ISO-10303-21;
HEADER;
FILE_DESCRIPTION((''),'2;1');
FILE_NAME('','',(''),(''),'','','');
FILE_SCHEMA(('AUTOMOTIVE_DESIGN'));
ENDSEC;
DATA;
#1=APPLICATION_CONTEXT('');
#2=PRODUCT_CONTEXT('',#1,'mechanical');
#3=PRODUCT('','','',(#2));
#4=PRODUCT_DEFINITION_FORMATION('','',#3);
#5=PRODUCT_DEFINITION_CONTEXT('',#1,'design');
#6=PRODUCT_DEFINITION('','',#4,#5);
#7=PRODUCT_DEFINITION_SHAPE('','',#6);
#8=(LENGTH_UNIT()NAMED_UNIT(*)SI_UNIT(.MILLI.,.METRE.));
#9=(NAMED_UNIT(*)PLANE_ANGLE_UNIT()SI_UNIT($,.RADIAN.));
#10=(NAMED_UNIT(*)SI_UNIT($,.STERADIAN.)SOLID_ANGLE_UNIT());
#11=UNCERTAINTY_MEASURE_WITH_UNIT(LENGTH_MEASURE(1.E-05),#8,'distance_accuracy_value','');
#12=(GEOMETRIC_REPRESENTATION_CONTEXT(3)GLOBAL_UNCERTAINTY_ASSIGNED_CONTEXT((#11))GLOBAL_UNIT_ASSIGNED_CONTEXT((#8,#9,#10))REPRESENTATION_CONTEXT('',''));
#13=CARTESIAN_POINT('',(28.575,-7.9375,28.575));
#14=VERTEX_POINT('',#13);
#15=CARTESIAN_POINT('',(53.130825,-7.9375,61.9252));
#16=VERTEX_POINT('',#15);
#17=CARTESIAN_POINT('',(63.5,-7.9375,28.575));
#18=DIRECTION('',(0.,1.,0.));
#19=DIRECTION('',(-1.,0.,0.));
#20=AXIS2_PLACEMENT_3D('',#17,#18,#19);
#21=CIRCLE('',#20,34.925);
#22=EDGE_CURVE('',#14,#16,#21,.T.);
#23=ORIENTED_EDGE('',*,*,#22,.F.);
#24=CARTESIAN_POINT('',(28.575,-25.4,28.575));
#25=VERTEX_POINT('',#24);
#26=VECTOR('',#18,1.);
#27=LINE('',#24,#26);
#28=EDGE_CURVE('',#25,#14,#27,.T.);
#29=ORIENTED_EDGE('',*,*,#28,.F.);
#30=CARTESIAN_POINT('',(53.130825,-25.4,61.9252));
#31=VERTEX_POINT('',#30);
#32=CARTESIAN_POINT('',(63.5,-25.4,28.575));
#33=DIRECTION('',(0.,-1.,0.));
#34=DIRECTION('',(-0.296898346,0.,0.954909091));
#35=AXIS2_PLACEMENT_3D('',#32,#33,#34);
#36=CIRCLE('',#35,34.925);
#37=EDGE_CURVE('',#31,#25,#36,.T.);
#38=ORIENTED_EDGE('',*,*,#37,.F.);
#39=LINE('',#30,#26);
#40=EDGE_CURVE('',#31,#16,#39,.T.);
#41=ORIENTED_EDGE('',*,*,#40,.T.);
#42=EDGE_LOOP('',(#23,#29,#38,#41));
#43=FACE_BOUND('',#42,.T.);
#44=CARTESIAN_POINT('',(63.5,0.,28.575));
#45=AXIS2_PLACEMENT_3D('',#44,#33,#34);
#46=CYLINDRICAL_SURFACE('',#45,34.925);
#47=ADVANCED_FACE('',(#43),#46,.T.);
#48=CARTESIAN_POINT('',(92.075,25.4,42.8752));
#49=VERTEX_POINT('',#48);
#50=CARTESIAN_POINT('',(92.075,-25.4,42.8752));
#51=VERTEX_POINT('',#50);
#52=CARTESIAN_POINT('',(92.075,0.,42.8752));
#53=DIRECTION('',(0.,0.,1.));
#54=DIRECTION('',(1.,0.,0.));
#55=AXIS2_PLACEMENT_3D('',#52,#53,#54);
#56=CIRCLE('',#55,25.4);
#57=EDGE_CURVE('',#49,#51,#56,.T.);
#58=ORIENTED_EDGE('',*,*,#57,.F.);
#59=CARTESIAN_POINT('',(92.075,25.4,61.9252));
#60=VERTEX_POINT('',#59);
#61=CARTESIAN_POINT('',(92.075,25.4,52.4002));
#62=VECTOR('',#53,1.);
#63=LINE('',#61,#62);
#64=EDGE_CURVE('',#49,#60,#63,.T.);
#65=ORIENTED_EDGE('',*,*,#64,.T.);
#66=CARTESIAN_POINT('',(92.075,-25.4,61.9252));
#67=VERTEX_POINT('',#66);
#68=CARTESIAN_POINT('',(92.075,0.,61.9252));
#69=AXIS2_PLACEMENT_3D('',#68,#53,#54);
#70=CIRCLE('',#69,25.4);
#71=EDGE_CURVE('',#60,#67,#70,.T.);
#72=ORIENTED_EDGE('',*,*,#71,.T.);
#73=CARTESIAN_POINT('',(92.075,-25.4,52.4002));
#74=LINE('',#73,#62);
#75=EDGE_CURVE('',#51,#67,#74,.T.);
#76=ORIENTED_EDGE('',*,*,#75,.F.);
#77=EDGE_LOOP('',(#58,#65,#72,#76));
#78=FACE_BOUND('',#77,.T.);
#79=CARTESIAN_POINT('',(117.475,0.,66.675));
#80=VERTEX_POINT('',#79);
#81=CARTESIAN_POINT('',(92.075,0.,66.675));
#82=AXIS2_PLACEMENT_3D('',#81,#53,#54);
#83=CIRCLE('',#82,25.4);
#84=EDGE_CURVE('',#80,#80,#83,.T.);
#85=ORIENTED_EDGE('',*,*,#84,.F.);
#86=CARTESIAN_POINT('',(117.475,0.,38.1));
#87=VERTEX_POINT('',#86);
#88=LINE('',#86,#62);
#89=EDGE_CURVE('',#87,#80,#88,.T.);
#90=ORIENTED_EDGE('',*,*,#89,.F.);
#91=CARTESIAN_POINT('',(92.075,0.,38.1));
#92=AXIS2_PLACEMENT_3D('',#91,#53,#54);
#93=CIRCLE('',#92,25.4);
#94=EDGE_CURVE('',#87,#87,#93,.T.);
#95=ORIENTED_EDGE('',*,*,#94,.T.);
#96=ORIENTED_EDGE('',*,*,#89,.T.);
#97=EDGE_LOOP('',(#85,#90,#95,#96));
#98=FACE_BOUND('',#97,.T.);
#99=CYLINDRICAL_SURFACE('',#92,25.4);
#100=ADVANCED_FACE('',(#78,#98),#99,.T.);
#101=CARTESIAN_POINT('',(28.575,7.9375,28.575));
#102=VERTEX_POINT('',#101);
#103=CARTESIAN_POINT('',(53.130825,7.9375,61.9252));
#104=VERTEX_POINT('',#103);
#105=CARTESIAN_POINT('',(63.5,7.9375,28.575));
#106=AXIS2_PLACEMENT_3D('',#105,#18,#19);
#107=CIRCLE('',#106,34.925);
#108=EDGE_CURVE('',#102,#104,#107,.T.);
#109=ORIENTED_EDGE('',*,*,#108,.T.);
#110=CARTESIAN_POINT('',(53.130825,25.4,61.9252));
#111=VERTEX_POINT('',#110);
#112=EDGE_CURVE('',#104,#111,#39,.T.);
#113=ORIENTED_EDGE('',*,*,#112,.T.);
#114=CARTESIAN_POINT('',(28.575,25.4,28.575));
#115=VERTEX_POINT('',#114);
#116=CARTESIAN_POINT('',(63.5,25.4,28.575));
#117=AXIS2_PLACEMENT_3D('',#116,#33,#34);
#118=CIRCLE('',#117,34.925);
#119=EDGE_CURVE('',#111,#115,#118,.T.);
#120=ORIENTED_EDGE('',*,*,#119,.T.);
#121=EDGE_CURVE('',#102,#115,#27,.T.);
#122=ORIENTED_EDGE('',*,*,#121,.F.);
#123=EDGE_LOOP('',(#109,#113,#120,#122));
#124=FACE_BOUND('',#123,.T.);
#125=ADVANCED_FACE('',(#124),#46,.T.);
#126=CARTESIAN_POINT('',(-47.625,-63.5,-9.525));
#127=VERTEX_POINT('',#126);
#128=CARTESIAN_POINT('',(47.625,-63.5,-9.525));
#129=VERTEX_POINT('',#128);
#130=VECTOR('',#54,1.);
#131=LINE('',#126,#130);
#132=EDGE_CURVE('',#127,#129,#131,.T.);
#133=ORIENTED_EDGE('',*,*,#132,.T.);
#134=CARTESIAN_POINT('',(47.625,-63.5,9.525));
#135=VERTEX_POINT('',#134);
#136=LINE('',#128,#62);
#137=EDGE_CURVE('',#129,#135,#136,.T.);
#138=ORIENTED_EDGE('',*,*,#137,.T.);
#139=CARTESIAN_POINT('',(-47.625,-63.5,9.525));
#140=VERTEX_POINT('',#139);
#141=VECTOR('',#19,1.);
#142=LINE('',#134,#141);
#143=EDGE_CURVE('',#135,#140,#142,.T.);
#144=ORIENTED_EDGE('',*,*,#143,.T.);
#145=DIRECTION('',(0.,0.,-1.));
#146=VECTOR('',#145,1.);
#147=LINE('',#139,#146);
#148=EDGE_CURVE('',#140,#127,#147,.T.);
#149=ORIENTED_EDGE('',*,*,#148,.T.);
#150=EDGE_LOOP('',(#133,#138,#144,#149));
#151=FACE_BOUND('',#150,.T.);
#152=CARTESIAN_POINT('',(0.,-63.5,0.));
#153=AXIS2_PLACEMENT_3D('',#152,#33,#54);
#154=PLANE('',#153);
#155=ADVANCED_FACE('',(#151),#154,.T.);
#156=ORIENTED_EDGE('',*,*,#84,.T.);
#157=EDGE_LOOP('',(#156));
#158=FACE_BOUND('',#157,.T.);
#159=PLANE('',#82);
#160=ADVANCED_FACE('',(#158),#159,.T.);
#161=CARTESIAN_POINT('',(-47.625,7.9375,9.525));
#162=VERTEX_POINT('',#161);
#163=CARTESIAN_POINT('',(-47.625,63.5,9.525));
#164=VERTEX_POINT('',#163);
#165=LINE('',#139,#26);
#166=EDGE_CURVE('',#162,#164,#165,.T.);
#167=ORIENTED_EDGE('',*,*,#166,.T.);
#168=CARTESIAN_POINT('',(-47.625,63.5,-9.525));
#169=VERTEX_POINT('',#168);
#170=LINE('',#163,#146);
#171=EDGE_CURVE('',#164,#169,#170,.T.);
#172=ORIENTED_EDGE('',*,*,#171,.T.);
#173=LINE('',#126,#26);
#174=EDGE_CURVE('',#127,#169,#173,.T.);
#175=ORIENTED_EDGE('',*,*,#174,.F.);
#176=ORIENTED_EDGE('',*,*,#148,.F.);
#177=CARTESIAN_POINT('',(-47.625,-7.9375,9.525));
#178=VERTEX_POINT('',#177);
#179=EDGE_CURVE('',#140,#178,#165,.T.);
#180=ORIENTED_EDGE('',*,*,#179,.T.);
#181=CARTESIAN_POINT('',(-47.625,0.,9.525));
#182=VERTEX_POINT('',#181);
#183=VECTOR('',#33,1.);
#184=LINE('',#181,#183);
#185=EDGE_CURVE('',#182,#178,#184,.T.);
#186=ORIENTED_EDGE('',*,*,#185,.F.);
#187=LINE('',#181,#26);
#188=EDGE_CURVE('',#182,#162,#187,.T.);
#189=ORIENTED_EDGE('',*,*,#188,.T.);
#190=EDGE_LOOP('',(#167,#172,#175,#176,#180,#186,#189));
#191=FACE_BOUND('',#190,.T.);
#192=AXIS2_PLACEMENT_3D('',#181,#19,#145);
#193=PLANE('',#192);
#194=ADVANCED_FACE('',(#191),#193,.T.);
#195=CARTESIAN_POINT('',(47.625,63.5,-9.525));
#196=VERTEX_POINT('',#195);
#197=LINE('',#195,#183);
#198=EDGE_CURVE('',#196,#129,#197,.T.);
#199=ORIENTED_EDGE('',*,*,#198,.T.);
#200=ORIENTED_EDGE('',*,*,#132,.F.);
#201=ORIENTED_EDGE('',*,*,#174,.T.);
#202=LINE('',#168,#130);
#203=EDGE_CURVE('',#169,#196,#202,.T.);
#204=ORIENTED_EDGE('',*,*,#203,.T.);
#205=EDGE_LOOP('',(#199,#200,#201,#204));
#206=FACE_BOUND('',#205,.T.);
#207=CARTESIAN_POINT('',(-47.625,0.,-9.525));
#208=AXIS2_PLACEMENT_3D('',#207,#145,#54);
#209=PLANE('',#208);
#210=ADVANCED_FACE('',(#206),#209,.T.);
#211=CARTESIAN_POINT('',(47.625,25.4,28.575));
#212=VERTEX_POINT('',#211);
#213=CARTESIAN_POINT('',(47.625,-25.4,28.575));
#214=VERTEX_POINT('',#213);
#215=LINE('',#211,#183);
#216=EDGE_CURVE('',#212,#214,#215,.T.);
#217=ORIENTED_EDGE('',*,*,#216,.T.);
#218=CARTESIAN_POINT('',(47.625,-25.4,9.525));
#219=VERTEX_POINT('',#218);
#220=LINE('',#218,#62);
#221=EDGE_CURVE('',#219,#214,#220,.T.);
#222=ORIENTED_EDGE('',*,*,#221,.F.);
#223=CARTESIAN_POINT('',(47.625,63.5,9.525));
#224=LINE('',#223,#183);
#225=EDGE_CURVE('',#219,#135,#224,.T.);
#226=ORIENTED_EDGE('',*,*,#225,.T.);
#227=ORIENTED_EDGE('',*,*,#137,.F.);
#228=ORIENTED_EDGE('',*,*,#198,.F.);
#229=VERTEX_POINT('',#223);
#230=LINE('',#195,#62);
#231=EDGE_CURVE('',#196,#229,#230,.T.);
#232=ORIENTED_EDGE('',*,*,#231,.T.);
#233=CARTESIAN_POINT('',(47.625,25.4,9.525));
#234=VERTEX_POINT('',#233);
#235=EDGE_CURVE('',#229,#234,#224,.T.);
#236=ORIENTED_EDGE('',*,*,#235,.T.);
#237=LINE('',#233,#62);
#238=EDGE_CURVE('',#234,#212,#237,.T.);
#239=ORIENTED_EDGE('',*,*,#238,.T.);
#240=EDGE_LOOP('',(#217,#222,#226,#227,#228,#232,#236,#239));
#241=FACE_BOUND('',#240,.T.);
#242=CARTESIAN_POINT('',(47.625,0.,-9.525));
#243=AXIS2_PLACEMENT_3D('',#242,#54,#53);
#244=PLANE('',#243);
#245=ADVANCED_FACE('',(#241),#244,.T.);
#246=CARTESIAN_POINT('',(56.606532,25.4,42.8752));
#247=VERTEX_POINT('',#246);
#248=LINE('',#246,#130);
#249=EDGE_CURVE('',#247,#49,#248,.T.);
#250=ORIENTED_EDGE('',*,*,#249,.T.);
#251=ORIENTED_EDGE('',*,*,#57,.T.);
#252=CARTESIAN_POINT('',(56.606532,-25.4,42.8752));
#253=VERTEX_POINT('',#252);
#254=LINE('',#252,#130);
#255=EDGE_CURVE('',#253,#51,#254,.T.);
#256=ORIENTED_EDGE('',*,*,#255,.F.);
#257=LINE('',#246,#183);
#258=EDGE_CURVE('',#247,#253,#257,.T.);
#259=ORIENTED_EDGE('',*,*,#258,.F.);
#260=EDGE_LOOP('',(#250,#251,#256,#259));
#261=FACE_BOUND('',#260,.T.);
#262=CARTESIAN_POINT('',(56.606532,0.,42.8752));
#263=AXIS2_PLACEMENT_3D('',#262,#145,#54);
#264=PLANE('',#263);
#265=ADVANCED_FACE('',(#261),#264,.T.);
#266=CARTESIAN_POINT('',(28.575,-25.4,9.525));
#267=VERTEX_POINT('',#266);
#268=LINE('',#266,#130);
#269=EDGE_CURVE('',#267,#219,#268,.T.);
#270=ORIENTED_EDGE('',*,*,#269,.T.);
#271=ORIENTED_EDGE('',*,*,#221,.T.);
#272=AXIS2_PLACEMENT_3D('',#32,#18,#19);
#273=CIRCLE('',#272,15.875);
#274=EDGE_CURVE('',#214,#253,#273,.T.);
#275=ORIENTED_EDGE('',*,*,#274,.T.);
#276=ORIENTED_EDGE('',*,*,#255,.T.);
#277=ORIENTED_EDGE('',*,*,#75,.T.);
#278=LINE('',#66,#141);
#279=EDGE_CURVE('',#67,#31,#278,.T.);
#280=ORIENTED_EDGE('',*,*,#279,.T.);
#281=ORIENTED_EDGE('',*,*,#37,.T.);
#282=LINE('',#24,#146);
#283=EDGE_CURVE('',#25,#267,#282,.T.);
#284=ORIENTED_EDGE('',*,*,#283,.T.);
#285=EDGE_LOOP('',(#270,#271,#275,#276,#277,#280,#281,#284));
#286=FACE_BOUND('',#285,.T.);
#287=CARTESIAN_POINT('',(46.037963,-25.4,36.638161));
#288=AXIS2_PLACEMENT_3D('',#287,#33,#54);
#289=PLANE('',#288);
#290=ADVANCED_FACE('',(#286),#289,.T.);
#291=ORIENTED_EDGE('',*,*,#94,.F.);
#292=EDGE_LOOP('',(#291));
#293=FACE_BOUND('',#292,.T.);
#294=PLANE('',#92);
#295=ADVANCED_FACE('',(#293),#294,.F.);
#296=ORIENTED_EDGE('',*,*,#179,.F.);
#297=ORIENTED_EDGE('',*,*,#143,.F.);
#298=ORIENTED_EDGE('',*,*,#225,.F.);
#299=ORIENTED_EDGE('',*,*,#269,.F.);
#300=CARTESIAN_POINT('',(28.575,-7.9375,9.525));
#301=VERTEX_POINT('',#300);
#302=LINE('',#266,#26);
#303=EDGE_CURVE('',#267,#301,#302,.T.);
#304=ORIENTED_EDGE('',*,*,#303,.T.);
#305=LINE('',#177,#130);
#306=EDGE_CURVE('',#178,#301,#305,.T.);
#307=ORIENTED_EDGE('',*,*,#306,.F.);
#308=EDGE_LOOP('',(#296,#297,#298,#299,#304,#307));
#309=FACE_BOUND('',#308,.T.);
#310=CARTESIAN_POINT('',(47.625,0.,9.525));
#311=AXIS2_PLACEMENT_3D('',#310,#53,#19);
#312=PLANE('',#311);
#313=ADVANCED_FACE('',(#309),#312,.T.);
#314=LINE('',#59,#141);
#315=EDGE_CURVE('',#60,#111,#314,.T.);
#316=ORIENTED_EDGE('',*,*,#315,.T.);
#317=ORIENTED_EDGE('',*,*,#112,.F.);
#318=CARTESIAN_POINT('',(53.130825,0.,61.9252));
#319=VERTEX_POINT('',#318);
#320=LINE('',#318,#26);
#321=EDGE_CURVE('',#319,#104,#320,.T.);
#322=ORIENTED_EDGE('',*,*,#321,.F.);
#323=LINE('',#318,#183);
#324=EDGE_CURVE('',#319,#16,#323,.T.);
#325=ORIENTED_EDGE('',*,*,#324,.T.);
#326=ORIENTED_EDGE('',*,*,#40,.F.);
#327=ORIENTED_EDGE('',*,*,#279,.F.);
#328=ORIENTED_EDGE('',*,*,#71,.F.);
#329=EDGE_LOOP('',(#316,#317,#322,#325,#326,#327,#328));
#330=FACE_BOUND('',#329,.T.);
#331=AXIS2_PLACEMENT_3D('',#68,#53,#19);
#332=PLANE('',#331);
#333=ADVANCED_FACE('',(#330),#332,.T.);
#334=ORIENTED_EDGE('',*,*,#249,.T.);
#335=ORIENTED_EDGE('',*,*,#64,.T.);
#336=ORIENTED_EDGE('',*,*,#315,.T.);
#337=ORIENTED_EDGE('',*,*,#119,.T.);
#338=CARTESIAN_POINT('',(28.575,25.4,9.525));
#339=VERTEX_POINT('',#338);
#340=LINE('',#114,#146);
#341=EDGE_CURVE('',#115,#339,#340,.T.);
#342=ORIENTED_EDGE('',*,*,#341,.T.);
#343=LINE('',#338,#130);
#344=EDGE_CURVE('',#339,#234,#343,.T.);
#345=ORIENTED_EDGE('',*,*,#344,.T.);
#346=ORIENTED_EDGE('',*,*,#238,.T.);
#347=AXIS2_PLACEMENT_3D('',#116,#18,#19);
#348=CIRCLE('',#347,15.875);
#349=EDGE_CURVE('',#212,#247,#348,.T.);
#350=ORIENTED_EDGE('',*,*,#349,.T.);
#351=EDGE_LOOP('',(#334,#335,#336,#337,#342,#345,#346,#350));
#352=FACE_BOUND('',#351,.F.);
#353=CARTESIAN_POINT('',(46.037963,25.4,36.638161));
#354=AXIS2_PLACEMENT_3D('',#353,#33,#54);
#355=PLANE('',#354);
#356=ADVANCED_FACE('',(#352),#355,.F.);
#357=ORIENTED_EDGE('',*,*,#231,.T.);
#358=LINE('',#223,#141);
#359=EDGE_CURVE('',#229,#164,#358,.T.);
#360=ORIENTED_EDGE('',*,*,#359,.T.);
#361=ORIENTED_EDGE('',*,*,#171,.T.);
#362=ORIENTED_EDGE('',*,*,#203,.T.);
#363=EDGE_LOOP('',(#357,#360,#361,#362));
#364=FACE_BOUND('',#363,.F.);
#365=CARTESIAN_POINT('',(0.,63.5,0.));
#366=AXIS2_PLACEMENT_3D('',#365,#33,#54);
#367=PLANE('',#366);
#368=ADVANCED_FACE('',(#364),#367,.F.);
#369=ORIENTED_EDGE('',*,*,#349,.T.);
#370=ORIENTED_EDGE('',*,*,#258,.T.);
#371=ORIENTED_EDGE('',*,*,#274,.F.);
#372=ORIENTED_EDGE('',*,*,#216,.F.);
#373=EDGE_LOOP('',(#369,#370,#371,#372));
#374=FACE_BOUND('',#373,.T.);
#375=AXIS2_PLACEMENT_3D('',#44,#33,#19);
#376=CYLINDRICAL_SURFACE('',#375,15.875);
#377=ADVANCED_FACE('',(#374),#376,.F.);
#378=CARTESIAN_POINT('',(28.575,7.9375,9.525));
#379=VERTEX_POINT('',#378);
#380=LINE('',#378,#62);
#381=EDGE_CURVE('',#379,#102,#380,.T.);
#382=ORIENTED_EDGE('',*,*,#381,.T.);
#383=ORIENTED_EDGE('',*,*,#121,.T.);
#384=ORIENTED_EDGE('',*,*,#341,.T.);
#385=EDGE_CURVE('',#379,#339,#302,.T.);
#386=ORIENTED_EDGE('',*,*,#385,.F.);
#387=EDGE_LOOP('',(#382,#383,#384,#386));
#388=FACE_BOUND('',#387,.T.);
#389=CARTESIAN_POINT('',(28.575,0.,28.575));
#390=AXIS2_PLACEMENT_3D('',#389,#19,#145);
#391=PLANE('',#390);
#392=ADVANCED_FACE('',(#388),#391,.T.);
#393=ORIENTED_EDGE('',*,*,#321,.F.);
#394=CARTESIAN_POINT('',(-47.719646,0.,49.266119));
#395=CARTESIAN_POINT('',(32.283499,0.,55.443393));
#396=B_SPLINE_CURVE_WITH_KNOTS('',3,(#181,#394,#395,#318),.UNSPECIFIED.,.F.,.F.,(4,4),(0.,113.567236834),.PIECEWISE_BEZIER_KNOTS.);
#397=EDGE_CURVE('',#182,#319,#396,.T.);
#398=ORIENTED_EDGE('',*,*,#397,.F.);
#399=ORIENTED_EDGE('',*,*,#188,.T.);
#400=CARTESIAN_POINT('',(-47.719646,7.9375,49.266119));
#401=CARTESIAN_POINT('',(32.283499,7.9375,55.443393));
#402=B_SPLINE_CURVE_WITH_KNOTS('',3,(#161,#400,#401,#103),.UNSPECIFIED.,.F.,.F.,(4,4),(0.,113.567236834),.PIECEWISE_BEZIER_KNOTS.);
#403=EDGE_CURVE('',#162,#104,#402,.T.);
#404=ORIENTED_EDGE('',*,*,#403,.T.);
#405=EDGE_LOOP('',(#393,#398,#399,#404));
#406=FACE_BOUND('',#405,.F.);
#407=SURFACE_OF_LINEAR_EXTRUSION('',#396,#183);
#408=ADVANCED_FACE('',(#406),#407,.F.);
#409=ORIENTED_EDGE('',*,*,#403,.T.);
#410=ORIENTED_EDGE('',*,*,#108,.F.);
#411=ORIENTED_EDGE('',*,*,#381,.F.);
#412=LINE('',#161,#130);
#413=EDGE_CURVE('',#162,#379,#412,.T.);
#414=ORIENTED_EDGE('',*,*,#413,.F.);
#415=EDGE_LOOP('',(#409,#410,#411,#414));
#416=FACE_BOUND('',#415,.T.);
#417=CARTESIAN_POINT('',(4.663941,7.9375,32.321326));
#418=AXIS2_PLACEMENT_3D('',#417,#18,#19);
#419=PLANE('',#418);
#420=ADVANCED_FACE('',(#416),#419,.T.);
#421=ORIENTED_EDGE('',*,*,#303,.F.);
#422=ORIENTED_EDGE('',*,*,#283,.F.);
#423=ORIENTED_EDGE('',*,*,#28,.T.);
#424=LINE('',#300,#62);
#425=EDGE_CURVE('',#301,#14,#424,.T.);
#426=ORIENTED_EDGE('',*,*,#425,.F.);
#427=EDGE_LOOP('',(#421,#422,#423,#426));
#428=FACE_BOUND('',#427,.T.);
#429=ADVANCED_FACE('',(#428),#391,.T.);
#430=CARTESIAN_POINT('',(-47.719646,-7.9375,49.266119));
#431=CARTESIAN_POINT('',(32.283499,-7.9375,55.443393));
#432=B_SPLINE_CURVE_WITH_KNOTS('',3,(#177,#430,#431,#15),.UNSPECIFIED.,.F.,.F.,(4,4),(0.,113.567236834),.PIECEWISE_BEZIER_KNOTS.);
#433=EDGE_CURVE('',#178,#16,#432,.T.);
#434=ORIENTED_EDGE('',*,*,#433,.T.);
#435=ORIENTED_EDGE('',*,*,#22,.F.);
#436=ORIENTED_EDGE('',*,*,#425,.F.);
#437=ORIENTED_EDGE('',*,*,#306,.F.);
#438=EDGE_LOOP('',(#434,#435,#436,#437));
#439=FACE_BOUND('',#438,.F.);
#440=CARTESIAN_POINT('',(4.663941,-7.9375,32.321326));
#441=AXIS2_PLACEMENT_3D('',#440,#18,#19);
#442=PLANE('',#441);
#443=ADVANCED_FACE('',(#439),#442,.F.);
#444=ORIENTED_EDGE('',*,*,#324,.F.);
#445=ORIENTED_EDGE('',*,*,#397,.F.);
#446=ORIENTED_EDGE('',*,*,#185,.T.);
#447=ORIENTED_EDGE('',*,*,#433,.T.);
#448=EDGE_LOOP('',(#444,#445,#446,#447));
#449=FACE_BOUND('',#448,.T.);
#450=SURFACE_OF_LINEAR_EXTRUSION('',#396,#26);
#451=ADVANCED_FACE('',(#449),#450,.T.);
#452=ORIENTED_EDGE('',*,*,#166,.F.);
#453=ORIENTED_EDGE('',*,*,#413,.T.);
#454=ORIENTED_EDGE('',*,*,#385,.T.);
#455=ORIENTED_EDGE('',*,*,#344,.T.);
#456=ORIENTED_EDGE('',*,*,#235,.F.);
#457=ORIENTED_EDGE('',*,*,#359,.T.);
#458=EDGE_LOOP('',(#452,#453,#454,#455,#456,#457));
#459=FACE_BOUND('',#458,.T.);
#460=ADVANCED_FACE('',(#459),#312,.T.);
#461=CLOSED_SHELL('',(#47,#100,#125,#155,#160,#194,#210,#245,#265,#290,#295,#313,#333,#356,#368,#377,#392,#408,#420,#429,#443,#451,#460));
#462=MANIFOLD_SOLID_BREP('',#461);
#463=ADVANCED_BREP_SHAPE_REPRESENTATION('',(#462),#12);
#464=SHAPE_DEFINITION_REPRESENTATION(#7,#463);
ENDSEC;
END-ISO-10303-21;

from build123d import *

# Parameters (mm, degrees)
F1_DEPTH = 63.5
F0_W     = 25.4
F0_H     = 19.05
F2_DEPTH = 25.4
F3_DEPTH = 7.9375


# Not quite as in the source:
# - ends of sketch curves that miss each other by under 0.0002 mm in the source are joined


with BuildPart() as f1:
    # F0 (on Front) → F1 (new body, symmetric)
    with BuildSketch(Plane.XZ):
        Polygon((-47.625, -9.525), (47.625, -9.525), (47.625, 9.525), (28.575, 9.525), (-47.625, 9.525), align=None)
    extrude(amount=F1_DEPTH, both=True)

    # F0 (on Front) → F2 (join, symmetric)
    with BuildSketch(Plane.XZ):
        with BuildLine():
            Line((28.575, 9.525), (47.625, 9.525))
            Line((47.625, 9.525), (47.625, 28.575))
            ThreePointArc((47.625, 28.575), (50.0566106583, 37.0183943417), (56.6065317176, 42.8752))
            Line((56.6065317176, 42.8752), (66.675, 42.8752))
            Line((66.675, 42.8752), (66.675, 61.9252))
            Line((66.675, 61.9252), (53.1308252517, 61.9252))
            ThreePointArc((53.1308252517, 61.9252), (35.3761751083, 49.2826338209), (28.575, 28.575))
            Line((28.575, 28.575), (28.575, 9.525))
        make_face()
        with Locations((79.375, 52.4002)):
            Rectangle(F0_W, F0_H)
    extrude(amount=F2_DEPTH, both=True)

    # F0 (on Front) → F3 (join, symmetric)
    with BuildSketch(Plane.XZ):
        with BuildLine():
            add(Edge.make_bspline(
                [(-47.625, 9.525), (-47.7196462452, 49.2661185562), (32.2834988688, 55.4433926855), (53.1308252517, 61.9252)],
                knots=[0, 0, 0, 0, 113.5672368344, 113.5672368344, 113.5672368344, 113.5672368344], degree=3))
            Line((-47.625, 9.525), (28.575, 9.525))
            Line((28.575, 9.525), (28.575, 28.575))
            ThreePointArc((28.575, 28.575), (35.3761751083, 49.2826338209), (53.1308252517, 61.9252))
        make_face()
    extrude(amount=F3_DEPTH, both=True)

    # F0 (on Front) → F4 (revolve)
    with BuildSketch(Plane.XZ):
        Polygon((92.075, 66.675), (92.075, 61.9252), (92.075, 42.8752), (92.075, 38.1), (117.475, 38.1), (117.475, 66.675), align=None)
    revolve(axis=Axis((92.075, 0, 52.3875), (0, 0, 1)))


solid = f1.part
